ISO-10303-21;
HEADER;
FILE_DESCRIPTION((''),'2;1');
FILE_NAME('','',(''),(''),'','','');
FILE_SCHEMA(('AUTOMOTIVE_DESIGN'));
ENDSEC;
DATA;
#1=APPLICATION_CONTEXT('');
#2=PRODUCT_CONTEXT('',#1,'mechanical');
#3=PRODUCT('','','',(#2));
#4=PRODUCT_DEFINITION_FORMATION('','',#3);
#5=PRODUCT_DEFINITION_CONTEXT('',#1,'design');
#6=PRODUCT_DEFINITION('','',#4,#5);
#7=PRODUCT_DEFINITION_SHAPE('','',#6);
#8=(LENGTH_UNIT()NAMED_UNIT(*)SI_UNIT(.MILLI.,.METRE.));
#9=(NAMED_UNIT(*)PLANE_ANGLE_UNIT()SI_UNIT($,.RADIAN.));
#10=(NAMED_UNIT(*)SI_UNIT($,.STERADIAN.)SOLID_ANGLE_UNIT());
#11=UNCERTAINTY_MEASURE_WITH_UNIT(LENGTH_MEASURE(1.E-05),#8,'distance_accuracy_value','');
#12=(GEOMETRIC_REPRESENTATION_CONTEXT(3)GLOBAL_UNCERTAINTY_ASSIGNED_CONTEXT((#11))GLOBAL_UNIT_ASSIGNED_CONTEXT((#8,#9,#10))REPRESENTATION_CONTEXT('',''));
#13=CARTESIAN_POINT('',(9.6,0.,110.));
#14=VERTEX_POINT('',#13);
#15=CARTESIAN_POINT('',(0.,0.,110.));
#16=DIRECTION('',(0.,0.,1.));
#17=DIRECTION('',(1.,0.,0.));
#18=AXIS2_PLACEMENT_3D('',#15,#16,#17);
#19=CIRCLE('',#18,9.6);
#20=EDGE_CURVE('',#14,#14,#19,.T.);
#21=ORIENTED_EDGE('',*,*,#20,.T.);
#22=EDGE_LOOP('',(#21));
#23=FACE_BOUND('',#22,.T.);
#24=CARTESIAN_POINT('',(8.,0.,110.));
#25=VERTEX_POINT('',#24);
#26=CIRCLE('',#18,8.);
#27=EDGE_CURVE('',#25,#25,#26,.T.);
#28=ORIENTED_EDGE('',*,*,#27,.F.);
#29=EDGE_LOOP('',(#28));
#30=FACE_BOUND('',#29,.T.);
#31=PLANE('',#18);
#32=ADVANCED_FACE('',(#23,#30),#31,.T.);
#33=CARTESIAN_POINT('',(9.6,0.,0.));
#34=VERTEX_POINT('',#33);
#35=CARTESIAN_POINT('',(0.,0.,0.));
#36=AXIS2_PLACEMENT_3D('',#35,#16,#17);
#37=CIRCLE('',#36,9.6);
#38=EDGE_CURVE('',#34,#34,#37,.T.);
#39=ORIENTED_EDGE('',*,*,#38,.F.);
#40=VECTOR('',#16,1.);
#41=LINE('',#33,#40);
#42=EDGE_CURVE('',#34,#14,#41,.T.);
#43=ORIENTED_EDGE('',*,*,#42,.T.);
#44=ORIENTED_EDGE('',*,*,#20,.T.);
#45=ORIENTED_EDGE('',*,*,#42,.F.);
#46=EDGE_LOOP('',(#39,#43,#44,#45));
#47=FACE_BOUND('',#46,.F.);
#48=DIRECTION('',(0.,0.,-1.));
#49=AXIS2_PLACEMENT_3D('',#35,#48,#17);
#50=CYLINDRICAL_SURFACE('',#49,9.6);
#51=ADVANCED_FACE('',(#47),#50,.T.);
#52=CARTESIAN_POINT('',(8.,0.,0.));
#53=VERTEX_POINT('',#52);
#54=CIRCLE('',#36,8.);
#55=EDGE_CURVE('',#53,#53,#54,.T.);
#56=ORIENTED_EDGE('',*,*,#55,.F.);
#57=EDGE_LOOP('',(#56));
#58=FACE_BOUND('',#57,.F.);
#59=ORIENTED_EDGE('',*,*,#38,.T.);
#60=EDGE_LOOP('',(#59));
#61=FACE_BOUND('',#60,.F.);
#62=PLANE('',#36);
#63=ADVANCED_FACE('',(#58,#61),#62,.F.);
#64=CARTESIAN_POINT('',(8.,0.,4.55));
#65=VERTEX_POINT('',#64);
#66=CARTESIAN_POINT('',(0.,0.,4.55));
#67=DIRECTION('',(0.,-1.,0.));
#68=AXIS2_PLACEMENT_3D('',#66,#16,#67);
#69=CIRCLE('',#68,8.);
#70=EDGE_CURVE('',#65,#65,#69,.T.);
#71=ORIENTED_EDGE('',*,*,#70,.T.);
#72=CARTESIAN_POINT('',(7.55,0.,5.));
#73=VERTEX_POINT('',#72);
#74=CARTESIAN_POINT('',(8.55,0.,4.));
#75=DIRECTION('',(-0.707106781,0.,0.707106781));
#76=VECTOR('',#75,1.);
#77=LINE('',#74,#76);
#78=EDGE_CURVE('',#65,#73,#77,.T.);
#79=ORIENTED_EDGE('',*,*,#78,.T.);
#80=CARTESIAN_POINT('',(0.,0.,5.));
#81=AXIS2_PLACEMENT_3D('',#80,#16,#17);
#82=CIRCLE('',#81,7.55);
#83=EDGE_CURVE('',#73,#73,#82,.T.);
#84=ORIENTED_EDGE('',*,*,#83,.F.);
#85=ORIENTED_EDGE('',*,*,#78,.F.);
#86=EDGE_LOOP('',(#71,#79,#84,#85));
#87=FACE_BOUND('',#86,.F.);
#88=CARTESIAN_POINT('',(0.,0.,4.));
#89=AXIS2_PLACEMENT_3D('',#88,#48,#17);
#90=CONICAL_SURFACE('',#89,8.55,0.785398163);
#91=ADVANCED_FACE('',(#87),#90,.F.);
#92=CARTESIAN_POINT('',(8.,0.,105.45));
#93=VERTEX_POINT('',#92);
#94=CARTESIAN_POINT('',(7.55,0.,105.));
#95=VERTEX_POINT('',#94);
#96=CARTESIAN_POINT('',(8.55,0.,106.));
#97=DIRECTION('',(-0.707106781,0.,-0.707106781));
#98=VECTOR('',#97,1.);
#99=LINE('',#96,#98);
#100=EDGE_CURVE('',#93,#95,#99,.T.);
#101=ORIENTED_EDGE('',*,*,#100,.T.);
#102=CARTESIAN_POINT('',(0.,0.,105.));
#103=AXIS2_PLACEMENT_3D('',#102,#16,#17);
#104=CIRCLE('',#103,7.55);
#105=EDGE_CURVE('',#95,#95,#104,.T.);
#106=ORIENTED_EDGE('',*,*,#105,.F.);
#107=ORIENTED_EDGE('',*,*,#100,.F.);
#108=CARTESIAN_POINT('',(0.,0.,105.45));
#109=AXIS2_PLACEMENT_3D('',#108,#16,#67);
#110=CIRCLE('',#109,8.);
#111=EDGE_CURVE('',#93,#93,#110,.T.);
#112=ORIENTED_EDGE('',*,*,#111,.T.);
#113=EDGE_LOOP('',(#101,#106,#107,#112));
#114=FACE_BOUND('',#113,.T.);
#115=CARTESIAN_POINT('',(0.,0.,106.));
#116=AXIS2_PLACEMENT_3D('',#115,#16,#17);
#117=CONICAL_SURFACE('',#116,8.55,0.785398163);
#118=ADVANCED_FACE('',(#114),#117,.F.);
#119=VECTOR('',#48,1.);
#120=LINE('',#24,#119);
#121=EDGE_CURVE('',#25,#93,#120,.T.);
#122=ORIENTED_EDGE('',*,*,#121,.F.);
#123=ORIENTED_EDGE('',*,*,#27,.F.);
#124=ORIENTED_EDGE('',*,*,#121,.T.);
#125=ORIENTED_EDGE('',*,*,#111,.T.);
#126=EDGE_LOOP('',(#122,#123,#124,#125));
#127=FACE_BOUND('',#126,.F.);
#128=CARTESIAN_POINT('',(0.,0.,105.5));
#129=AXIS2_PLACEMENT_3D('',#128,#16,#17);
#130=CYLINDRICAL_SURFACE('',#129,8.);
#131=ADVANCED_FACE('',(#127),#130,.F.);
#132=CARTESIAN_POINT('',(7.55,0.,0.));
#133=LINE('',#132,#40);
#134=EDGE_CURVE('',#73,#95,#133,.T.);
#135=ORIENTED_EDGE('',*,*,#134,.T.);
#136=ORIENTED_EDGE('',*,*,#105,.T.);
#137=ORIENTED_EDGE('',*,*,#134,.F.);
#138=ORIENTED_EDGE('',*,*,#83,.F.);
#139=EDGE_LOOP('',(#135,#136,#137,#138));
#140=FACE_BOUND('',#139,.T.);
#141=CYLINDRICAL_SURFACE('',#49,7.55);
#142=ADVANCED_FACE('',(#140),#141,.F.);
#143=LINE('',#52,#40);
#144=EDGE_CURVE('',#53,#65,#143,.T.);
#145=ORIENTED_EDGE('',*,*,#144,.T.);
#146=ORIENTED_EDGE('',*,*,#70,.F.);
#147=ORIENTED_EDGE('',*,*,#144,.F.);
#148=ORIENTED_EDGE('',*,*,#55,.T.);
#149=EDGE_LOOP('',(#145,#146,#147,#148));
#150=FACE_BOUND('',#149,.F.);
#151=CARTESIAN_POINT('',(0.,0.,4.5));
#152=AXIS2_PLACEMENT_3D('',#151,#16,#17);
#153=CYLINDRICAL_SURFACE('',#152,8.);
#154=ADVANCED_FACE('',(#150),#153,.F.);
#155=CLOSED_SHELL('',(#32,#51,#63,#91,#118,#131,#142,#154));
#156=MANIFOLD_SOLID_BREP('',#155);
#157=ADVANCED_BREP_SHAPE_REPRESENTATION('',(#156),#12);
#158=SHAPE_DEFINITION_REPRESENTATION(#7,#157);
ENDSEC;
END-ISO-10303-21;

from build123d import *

# Parameters (mm, degrees)
F0_R         = 9.6
F0_R_2       = 8
F1_DEPTH     = 110
F0_R_3       = 7.55
F2_DEPTH     = 106
F3_DEPTH     = 4
F4_S5_R      = 8
F4_T6_DEPTH  = 14
F4_S11_R     = 8
F4_T12_DEPTH = 14


# Not quite as in the source:
# - a fillet or chamfer that OpenCascade refuses, or shapes differently, is made with other operations: its cross-section is extruded or revolved along the edge and cut away or added


with BuildPart() as f1:
    # F0 (on Top) → F1 (new body)
    with BuildSketch(Plane.XY):
        Circle(F0_R)
        Circle(F0_R_2, mode=Mode.SUBTRACT)
    extrude(amount=F1_DEPTH)

    # F0 (on Top) → F2 (join)
    with BuildSketch(Plane.XY):
        Circle(F0_R_2)
        Circle(F0_R_3, mode=Mode.SUBTRACT)
    extrude(amount=F2_DEPTH)

    # F0 (on Top) → F3 (cut)
    with BuildSketch(Plane.XY):
        Circle(F0_R_2)
        Circle(F0_R_3, mode=Mode.SUBTRACT)
    extrude(amount=F3_DEPTH, mode=Mode.SUBTRACT)

    # F4: chamfer of 1 on 2 edges, made by hand


with BuildPart() as f4_tool2:
    # F4_s3 → F4_t4 (revolve)
    with BuildSketch(Plane.XZ):
        Polygon((8.55, 4), (7.55, 5), (7.55, 4), align=None)
    revolve(axis=Axis((0, 0, 4), (0, 0, 1)))

    # F4_s5 → F4_t6 (intersect, symmetric)
    with BuildSketch(Plane.XY.offset(4.5)):
        Circle(F4_S5_R)
    extrude(amount=F4_T6_DEPTH, both=True, mode=Mode.INTERSECT)


with BuildPart() as f1_1:
    add(f1.part)

    # F4_t1: cut F4_tool2
    add(f4_tool2.part, mode=Mode.SUBTRACT)


with BuildPart() as f4_tool8:
    # F4_s9 → F4_t10 (revolve)
    with BuildSketch(Plane.XZ):
        Polygon((8.55, 106), (7.55, 105), (7.55, 106), align=None)
    revolve(axis=Axis((0, 0, 106), (0, 0, 1)))

    # F4_s11 → F4_t12 (intersect, symmetric)
    with BuildSketch(Plane.XY.offset(105.5)):
        Circle(F4_S11_R)
    extrude(amount=F4_T12_DEPTH, both=True, mode=Mode.INTERSECT)


with BuildPart() as f1_2:
    add(f1_1.part)

    # F4_t7: cut F4_tool8
    add(f4_tool8.part, mode=Mode.SUBTRACT)


solid = f1_2.part
